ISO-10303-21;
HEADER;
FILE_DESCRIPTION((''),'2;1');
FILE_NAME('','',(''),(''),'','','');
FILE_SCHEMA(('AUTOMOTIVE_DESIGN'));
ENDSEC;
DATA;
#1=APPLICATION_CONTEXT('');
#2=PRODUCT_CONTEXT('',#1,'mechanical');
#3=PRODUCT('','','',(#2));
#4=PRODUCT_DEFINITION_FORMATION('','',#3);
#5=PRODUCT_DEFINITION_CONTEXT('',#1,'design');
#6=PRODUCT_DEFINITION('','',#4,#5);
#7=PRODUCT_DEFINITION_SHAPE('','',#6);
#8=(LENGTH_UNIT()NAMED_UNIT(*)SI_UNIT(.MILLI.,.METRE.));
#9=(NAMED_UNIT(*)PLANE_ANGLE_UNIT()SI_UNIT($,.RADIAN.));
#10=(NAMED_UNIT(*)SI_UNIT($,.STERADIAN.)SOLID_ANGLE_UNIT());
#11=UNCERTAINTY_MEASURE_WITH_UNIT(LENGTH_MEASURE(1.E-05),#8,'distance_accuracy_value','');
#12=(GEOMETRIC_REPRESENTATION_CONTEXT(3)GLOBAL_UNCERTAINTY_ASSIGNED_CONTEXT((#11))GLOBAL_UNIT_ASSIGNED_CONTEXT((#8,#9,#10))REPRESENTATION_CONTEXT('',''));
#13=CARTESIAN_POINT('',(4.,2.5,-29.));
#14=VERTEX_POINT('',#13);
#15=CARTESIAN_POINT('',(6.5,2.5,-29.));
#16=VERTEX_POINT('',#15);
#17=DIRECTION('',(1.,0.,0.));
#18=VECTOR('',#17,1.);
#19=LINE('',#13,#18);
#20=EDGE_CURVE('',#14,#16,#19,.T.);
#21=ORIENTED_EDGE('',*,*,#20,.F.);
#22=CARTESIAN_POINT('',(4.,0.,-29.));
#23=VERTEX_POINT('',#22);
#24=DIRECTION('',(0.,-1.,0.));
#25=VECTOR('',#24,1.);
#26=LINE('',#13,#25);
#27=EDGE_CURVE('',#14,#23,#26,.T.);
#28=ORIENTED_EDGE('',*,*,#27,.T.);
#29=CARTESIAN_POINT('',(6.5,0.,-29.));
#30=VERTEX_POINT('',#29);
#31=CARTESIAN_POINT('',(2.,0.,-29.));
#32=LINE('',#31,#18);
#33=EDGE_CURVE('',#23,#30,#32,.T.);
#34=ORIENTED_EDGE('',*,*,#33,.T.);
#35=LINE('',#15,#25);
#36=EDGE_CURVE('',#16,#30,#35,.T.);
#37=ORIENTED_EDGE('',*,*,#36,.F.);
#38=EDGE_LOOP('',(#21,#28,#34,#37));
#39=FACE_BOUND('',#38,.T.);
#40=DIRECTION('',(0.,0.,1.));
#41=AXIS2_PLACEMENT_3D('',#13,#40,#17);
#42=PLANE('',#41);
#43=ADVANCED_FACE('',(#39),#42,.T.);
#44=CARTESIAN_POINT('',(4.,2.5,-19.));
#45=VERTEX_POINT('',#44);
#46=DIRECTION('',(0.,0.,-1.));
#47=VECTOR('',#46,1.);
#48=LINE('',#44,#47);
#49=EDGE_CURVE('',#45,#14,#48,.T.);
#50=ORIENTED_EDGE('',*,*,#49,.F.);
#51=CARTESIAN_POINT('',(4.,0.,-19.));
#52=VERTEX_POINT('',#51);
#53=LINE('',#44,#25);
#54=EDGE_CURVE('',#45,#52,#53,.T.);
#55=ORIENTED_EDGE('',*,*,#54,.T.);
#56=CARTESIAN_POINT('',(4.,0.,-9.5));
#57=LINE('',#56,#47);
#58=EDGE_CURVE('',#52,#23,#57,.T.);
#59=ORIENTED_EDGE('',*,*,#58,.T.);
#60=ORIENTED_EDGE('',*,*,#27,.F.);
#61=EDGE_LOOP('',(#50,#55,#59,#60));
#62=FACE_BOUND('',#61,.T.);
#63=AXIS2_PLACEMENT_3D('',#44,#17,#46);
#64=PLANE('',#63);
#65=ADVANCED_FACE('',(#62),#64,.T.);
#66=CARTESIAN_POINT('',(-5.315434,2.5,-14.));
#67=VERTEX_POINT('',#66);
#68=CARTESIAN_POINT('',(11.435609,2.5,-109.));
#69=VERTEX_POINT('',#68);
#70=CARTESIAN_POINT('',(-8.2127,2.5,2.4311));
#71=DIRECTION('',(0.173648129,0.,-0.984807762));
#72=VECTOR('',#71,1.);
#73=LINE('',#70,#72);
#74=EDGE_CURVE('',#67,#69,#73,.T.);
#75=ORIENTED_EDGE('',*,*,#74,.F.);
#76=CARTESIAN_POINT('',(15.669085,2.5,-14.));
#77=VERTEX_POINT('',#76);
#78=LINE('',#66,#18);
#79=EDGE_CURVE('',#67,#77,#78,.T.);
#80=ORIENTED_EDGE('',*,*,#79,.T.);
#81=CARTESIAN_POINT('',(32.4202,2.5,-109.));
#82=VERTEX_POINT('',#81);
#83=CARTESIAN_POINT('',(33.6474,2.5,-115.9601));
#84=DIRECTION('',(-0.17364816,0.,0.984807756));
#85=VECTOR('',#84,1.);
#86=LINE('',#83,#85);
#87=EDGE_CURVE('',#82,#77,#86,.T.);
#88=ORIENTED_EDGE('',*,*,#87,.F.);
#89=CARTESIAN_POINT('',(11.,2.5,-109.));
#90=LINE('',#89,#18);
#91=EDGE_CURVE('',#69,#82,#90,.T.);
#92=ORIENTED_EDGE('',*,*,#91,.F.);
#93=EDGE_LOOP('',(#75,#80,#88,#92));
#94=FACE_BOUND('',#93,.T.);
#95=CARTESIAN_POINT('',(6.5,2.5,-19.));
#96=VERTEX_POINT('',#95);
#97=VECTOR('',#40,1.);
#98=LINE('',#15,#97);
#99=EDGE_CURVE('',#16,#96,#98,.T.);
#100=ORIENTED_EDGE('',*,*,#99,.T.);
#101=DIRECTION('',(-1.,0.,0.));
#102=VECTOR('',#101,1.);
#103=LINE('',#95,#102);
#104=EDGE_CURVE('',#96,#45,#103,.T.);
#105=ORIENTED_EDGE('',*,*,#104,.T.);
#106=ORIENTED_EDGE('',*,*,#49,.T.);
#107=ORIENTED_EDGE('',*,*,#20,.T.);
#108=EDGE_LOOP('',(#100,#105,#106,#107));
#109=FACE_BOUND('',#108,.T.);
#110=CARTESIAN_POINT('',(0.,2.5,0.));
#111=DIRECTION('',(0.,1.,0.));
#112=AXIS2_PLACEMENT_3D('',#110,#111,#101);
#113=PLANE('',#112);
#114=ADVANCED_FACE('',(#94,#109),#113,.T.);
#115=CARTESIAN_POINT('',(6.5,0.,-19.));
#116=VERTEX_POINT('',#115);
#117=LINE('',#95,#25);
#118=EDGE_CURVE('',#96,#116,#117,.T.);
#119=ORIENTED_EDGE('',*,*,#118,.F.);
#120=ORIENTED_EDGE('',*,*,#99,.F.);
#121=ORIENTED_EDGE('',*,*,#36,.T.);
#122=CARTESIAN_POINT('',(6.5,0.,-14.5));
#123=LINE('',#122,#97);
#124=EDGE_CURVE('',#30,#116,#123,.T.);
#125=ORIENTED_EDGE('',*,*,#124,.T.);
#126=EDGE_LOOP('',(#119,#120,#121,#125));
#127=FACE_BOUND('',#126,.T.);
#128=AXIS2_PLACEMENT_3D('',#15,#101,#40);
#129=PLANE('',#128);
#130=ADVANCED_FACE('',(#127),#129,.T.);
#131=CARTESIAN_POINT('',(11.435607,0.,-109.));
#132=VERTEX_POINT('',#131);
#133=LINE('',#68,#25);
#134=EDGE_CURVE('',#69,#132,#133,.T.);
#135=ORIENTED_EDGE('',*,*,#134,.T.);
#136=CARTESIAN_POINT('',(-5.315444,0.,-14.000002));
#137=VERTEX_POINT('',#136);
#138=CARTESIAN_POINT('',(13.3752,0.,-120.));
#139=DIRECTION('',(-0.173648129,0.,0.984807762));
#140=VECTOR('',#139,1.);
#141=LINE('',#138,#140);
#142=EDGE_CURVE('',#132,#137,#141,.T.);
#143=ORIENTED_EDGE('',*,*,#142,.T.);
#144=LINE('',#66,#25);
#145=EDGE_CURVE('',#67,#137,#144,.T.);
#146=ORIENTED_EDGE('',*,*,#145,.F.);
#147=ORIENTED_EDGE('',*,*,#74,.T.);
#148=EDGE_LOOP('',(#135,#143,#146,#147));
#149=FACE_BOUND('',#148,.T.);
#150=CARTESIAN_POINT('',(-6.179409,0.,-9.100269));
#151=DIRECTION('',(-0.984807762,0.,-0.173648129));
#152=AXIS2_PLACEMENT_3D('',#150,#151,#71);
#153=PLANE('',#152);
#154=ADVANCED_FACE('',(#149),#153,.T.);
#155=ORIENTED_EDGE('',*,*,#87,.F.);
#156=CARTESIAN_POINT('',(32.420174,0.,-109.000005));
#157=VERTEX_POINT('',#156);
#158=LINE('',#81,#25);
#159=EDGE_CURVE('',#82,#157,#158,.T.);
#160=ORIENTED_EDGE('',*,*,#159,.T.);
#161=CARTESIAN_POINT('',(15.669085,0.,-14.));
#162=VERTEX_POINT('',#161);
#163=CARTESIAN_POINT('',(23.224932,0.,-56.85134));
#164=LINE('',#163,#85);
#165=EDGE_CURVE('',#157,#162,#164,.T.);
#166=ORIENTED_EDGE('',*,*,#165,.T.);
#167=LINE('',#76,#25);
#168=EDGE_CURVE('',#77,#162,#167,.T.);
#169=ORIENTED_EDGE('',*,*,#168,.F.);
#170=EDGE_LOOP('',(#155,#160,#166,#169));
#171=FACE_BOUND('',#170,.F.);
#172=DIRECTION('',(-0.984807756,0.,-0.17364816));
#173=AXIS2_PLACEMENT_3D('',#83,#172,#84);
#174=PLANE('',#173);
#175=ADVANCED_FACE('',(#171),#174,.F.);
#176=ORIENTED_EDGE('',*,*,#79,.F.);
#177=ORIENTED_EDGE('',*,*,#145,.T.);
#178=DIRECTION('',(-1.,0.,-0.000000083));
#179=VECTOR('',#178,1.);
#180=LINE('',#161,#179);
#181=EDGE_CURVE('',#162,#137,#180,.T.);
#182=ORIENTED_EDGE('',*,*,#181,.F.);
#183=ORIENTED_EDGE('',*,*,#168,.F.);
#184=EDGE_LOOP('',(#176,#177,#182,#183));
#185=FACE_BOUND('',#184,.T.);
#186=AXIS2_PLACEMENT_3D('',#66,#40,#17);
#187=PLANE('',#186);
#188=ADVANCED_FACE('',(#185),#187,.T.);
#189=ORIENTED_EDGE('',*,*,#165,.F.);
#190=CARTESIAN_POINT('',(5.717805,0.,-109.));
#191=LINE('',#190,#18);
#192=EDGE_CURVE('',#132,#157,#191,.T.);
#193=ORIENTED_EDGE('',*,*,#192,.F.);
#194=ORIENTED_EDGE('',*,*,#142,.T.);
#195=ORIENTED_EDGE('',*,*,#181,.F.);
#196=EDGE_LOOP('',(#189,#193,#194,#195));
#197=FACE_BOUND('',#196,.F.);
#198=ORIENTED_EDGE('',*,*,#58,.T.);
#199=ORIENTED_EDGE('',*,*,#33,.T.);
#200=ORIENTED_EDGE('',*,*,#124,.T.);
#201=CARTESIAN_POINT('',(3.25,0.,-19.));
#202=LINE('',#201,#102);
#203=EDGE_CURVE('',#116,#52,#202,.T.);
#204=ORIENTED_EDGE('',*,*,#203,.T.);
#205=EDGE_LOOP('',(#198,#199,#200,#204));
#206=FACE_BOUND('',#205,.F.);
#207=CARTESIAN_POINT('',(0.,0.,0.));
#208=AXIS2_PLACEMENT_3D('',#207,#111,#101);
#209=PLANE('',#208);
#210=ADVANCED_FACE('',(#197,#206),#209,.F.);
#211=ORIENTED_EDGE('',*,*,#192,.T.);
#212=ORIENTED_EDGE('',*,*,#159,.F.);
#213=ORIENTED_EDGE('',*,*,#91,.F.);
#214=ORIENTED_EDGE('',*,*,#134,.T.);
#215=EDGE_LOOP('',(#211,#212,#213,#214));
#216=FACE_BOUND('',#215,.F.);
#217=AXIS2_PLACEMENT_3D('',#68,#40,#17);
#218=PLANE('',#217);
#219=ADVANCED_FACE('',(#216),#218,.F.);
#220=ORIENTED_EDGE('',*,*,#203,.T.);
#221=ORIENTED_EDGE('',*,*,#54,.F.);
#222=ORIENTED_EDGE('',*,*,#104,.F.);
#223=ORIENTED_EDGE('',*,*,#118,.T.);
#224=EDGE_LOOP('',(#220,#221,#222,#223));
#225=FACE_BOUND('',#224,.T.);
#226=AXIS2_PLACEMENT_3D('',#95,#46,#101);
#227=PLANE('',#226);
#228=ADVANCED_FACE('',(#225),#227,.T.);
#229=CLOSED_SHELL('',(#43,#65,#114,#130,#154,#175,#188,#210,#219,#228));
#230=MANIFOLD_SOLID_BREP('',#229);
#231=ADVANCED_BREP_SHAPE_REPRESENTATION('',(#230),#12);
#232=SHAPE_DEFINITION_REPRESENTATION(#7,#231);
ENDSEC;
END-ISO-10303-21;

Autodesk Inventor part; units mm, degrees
ref_plane "YZ Plane" through (0, 0, 0) normal (1, 0, 0) x (0, 1, 0)
ref_plane "XZ Plane" through (0, 0, 0) normal (0, 1, 0) x (-1, 0, 0)
ref_plane "XY Plane" through (0, 0, 0) normal (0, 0, 1) x (1, 0, 0)
sketch "スケッチ1" plane through (0, 0, 0) normal (0, 1, 0) x (-1, 0, 0)
  circle A0 centre (0, 0) radius 11
  line L0 (11, 10) -> (-11, 10)
  line L1 (-11, 10) -> (-11, -10)
  line L2 (-11, -10) -> (11, -10)
  line L3 (11, -10) -> (11, 10)
  line L4 (11, -10) -> (-11, -10)
  line L5 (-11, -10) -> (-11, -110)
  line L6 (-11, -110) -> (11, -110) construction
  line L7 (11, -110) -> (11, -10) construction
  arc A1 (-34.6127, -115.6757) -> (-13.3752, -120) centre (0, 0) ccw
  circle A2 centre (22, 0) radius 11
  circle A3 centre (-22, 0) radius 11
  line L8 (46.542, 0) -> (-48.2519, 0) projected
  line L9 (0, 0) -> (-13.7873, 2.4311)
  line L10 (-13.7873, 2.4311) -> (-34.6127, -115.6757)
  line L11 (22, 0) -> (8.2127, 2.4311)
  line L12 (8.2127, 2.4311) -> (-13.3752, -120)
  line L13 (8.2127, 2.4311) -> (8.9192, 6.438)
  line L14 (-13.7873, 2.4311) -> (-7.33, 8.2019)
  point P0 (11, 0)
  point P1 (11, 0)
  point P2 (4.5826, 10)
  point P3 (-4.5826, 10)
  point P4 (-11, 0)
  point P5 (-11, 0)
  point P6 (-11, 0)
  point P7 (4.5826, -10)
  point P8 (11, 0)
  point P9 (-11, 0)
  point P10 (-4.5826, -10)
  point P11 (4.5826, -10)
  point P12 (-4.5826, -10)
  point P13 (6.1794, -9.1003)
  point P14 (7.784, 0)
  point P15 (10.822, 1.971)
  point P16 (-14.216, 0)
  point P17 (11, 1.9396)
  dimension "d0" = 22
  dimension "d1" = 20
  dimension "d2" = 100
  dimension "d13" = 10
  dimension "d14" = 14
  dimension "d15" = 10
extrude "押し出し1" add sketch "スケッチ1" along normal blind 2.5 contours L12 L2 A0 | A0 L2 L8 L12 | L8 L9 A0 L0 L13 L12 | L2 L12 L5 A0 | A0 L2 | L8 A0 L9 | L2 L1 A0 | L12 A1 L10 A3 L1 L5 | L1 L9 A0 | A3 L9 L1 | L8 L10 L9 A3 | A3 L10 L8 | L9 L1 L14 A0 | L9 A3 L14 L1 | L9 L14 A3 picked at (-14.6149, -5.4805)
sketch "スケッチ2" plane through (0, 2.5, 0) normal (0, 1, 0) x (1, 0, 0)
  line L0 (33.6474, 115.9601) -> (12.5819, -3.5083)
  line L1 (13.7873, -2.4311) -> (34.6127, 115.6757) projected
  arc A0 (34.6127, 115.6757) -> (13.3752, 120) centre (0, 0) ccw projected
  line L2 (7.33, -8.2019) -> (13.7873, -2.4311) projected
  dimension "d16" = 1
extrude "押し出し2" cut sketch "スケッチ2" against normal through all
sketch "スケッチ3" plane through (0, 2.5, 0) normal (0, 1, 0) x (1, 0, 0)
  line L0 (-11, 14) -> (-4, 14) projected
  line L1 (-4, 14) -> (16.0696, 14)
  line L2 (12.5819, -3.5083) -> (33.6474, 115.9601) projected
  arc A0 (33.6474, 115.9601) -> (13.3752, 120) centre (0, 0) ccw projected
  line L3 (13.3752, 120) -> (-8.9192, -6.438) projected
  arc A1 (-8.9192, -6.438) -> (-4.5826, -10) centre (0, 0) ccw projected
  line L4 (-4.5826, -10) -> (4.5826, -10) projected
  arc A2 (4.5826, -10) -> (7.33, -8.2019) centre (0, 0) ccw projected
  line L5 (7.33, -8.2019) -> (12.5819, -3.5083) projected
  point P0 (15.6691, 14)
  point P1 (-5.3154, 14)
extrude "押し出し3" cut sketch "スケッチ3" against normal through all contours L0 L1 L2 L5 A2 L4 A1 L3
sketch "スケッチ4" plane through (0, 2.5, 0) normal (0, 1, 0) x (1, 0, 0)
  line L0 (6.5, 29) -> (6.5, 19) projected
  line L1 (4, 19) -> (4, 29) projected
  line L2 (4, 29) -> (6.5, 29) projected
  line L3 (6.5, 19) -> (4, 19) projected
  point P0 (0, 0)
extrude "押し出し4" cut sketch "スケッチ4" against normal through all
sketch "スケッチ5" plane through (0, 2.5, 0) normal (0, 1, 0) x (1, 0, 0)
  line L0 (11, 109) -> (-11, 109) projected
  line L1 (11, 109) -> (32.4202, 109)
  line L2 (33.6474, 115.9601) -> (15.6691, 14) projected
  line L3 (6.5, 19) -> (4, 19) projected
  line L4 (4, 19) -> (4, 29) projected
  line L5 (4, 29) -> (6.5, 29) projected
  line L6 (6.5, 29) -> (6.5, 19) projected
  line L7 (-5.3154, 14) -> (15.6691, 14) projected
  line L8 (15.6691, 14) -> (33.6474, 115.9601) projected
  arc A0 (33.6474, 115.9601) -> (13.3752, 120) centre (0, 0) ccw projected
  line L9 (13.3752, 120) -> (-5.3154, 14) projected
  point P0 (11.4356, 109)
extrude "押し出し5" cut sketch "スケッチ5" against normal through all contours L9 A0 L2 L1
properties part number "dish_under" material "木材 (カエデ材)"
